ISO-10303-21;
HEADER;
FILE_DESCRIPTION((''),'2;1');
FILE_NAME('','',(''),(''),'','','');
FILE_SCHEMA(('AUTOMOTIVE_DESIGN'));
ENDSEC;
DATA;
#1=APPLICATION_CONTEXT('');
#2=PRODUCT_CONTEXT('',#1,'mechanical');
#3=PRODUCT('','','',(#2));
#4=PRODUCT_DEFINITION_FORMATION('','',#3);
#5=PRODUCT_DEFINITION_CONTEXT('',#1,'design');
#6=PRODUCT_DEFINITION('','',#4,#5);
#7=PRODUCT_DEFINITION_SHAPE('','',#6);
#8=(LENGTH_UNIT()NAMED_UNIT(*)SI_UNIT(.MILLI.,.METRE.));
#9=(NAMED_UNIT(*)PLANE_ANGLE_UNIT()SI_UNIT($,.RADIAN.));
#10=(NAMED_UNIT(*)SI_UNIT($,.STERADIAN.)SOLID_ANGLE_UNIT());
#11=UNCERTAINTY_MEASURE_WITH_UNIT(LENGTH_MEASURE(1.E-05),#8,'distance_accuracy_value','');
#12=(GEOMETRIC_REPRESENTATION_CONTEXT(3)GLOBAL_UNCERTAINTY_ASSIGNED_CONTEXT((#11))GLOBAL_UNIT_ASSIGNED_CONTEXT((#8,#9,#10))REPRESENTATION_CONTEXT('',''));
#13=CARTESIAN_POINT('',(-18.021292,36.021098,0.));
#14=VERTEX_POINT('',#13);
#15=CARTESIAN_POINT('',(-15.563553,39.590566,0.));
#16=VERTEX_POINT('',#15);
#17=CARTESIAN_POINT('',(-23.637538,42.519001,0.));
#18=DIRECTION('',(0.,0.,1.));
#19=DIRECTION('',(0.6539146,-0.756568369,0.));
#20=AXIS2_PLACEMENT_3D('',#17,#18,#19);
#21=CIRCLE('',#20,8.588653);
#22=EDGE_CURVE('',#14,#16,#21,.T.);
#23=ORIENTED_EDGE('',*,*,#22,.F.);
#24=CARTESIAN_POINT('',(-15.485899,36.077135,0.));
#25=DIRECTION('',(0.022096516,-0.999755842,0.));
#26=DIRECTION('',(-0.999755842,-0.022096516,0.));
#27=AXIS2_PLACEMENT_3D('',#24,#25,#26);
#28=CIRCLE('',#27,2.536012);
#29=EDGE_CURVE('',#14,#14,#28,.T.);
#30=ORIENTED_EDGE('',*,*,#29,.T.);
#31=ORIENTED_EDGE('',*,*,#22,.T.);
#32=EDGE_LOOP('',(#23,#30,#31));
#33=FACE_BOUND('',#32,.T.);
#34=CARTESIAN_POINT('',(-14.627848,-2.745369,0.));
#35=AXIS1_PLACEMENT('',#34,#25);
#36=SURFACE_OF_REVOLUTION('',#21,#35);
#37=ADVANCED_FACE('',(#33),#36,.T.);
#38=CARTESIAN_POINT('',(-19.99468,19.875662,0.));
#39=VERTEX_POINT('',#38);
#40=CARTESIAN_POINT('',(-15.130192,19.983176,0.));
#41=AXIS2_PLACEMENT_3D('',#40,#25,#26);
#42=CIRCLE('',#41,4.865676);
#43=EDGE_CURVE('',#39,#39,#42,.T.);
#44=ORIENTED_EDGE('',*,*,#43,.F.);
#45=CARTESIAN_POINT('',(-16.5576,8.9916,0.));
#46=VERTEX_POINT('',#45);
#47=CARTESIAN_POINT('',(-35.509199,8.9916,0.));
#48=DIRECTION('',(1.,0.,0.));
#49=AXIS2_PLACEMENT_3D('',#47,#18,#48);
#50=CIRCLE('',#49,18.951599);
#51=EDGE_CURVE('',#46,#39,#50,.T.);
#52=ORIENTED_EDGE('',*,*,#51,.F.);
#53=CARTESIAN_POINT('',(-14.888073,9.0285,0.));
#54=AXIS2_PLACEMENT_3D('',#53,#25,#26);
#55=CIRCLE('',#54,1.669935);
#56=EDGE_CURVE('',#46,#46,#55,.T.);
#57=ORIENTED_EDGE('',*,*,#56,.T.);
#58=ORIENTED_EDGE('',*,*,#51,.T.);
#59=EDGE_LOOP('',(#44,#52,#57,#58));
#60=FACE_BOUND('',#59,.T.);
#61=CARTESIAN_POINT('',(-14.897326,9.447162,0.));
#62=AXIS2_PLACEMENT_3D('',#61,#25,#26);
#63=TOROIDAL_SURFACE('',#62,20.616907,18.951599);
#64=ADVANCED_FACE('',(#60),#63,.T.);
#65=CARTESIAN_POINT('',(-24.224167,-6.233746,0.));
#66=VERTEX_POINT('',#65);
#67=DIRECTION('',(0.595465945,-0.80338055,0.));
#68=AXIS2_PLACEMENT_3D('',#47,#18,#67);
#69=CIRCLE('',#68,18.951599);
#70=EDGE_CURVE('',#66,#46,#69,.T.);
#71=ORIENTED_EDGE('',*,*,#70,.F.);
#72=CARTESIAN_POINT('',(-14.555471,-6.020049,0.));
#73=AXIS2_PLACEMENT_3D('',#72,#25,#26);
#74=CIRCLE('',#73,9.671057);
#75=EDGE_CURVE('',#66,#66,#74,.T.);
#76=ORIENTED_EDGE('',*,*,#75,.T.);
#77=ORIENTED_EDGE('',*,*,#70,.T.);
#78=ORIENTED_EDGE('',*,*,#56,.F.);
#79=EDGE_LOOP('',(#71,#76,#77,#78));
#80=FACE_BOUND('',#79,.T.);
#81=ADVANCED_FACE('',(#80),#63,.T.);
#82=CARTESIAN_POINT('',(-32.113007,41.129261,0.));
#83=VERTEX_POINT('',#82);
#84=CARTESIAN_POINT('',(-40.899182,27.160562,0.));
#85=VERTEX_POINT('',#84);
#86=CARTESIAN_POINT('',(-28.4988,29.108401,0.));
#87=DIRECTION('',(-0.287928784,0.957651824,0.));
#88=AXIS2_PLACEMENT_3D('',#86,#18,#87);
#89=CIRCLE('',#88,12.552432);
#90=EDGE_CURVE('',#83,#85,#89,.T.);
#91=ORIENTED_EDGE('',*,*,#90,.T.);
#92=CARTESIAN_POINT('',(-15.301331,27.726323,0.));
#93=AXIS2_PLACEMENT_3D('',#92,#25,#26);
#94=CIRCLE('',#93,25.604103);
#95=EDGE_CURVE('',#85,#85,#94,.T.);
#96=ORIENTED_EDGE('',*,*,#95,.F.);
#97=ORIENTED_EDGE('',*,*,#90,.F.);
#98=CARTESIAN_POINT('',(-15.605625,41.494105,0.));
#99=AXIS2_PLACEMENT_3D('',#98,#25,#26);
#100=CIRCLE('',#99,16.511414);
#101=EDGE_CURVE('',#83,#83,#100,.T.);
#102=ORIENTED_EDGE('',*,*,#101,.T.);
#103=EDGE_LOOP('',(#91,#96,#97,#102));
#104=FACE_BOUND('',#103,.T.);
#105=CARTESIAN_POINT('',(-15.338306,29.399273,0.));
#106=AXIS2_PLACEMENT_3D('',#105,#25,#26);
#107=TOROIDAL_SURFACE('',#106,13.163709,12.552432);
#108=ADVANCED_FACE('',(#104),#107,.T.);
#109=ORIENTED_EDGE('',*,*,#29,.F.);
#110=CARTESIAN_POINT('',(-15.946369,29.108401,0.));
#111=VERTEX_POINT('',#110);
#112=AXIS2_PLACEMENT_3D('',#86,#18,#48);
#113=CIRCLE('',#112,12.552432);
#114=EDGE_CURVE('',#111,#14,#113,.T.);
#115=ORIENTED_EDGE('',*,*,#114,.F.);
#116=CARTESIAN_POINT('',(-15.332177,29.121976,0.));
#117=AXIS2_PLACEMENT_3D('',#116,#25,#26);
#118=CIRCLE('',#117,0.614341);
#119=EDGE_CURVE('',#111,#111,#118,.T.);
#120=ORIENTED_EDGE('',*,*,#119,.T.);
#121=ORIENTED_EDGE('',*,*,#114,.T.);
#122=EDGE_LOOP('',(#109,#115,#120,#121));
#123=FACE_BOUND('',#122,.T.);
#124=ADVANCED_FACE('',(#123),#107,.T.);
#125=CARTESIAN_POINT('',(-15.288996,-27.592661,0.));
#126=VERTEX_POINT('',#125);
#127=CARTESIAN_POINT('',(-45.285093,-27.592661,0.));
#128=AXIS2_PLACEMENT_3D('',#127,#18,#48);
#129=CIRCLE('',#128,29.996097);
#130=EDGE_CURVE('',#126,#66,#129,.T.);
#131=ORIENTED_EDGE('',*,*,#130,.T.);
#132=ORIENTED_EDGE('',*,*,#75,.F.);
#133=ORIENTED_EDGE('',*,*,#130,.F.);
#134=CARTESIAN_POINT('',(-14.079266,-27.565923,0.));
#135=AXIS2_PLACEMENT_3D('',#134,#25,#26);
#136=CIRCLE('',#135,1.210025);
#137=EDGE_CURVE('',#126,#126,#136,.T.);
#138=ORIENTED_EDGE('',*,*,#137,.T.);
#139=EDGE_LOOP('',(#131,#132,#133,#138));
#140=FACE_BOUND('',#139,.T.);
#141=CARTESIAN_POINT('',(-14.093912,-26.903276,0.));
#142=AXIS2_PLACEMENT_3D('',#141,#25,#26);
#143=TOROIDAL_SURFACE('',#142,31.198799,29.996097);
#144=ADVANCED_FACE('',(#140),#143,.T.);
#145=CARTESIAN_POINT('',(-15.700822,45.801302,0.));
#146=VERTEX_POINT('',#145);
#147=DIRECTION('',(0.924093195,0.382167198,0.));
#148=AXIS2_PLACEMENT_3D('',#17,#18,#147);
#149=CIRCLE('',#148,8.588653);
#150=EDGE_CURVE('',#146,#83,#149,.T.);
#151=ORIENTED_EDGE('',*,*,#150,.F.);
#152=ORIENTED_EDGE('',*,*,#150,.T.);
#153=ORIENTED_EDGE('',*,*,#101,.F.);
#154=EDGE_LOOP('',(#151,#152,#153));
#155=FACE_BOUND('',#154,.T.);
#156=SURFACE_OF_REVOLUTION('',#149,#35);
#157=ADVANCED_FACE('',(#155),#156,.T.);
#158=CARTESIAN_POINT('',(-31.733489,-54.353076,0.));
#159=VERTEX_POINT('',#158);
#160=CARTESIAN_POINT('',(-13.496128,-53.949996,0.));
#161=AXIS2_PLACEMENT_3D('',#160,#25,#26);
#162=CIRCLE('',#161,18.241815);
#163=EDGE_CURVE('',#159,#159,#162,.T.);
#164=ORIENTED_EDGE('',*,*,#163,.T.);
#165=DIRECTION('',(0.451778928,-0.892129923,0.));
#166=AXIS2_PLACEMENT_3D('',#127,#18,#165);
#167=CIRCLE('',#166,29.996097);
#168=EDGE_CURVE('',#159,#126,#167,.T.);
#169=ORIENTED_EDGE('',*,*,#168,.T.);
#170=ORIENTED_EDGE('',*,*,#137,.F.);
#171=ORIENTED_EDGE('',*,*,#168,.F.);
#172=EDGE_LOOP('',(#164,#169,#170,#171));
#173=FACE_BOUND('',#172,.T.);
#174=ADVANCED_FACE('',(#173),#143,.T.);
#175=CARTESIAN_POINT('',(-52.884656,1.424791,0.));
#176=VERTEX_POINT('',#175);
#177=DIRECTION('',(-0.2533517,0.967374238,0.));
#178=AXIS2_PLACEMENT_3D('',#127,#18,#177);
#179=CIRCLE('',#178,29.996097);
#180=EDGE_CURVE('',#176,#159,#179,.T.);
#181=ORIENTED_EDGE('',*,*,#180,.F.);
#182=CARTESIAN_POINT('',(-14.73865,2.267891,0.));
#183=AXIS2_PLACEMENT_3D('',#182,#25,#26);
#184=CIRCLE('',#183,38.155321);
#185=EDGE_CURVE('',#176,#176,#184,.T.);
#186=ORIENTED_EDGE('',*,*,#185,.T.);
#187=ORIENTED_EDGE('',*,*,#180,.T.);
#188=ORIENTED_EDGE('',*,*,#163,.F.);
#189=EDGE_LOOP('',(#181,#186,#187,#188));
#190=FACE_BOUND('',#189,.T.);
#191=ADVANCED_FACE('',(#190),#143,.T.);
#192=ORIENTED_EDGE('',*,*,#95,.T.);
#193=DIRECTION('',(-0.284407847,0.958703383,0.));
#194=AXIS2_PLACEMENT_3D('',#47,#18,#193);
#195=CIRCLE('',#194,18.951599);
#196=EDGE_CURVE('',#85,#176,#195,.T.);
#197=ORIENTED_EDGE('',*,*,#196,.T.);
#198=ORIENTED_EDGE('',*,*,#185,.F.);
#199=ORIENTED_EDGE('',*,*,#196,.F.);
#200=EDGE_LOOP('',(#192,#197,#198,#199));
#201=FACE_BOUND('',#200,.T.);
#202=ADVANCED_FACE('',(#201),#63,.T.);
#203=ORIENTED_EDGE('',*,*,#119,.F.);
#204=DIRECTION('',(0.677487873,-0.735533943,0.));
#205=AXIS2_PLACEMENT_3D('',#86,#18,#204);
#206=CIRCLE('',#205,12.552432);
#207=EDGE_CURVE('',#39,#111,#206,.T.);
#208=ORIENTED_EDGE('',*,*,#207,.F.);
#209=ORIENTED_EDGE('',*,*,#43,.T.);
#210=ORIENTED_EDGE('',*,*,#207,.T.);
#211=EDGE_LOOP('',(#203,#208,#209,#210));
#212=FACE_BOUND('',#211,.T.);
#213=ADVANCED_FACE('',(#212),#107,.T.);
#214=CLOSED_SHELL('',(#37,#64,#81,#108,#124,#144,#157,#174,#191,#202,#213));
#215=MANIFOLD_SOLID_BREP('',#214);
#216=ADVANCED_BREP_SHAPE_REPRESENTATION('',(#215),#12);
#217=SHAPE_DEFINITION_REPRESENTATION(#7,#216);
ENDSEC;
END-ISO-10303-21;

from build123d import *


with BuildPart() as f1:
    # F0 (on Top) → F1 (revolve)
    with BuildSketch(Plane.XY):
        with BuildLine():
            Line((-15.5635529785, 39.5905664053), (-15.7008221149, 45.8013020266))
            ThreePointArc((-15.7008221149, 45.8013020266), (-25.9890385476, 50.7794728031), (-32.1130069449, 41.1292607477))
            ThreePointArc((-32.1130069449, 41.1292607477), (-24.2210019432, 40.909417782), (-18.0212922533, 36.0210976578))
            ThreePointArc((-18.0212922533, 36.0210976578), (-16.5635800166, 37.6482636414), (-15.5635529785, 39.5905664053))
        make_face()
        with BuildLine():
            ThreePointArc((-18.0212922533, 36.0210976578), (-24.2210019432, 40.909417782), (-32.1130069449, 41.1292607477))
            ThreePointArc((-32.1130069449, 41.1292607477), (-26.564502454, 34.4444831281), (-18.0212922533, 36.0210976578))
        make_face()
        with BuildLine():
            ThreePointArc((-18.0212922533, 36.0210976578), (-26.564502454, 34.4444831281), (-32.1130069449, 41.1292607477))
            ThreePointArc((-32.1130069449, 41.1292607477), (-39.1241426865, 35.7916379536), (-40.8991822818, 27.16056178))
            ThreePointArc((-40.8991822818, 27.16056178), (-29.2726936854, 26.8876636908), (-19.9946800375, 19.875661609))
            ThreePointArc((-19.9946800375, 19.875661609), (-17.0029111772, 24.0677588183), (-15.9463685086, 29.1084013879))
            ThreePointArc((-15.9463685086, 29.1084013879), (-16.4762849853, 32.7170949973), (-18.0212922533, 36.0210976578))
        make_face()
        with BuildLine():
            ThreePointArc((-19.9946800375, 19.875661609), (-29.2726936854, 26.8876636908), (-40.8991822818, 27.16056178))
            ThreePointArc((-40.8991822818, 27.16056178), (-32.6294972412, 17.2550941542), (-19.9946800375, 19.875661609))
        make_face()
        with BuildLine():
            ThreePointArc((-19.9946800375, 19.875661609), (-32.6294972412, 17.2550941542), (-40.8991822818, 27.16056178))
            ThreePointArc((-40.8991822818, 27.16056178), (-52.6890937803, 16.9924939955), (-52.8846556294, 1.4247911728))
            ThreePointArc((-52.8846556294, 1.4247911728), (-37.541361976, 1.3866505854), (-24.2241672845, -6.2337457553))
            ThreePointArc((-24.2241672845, -6.2337457553), (-18.5824082634, 0.468287802), (-16.5576002259, 8.9916000143))
            ThreePointArc((-16.5576002259, 8.9916000143), (-17.4372866131, 14.6985325185), (-19.9946800375, 19.875661609))
        make_face()
        with BuildLine():
            ThreePointArc((-24.2241672845, -6.2337457553), (-37.541361976, 1.3866505854), (-52.8846556294, 1.4247911728))
            ThreePointArc((-52.8846556294, 1.4247911728), (-40.4017050576, -9.3175910109), (-24.2241672845, -6.2337457553))
        make_face()
        with BuildLine():
            ThreePointArc((-24.2241672845, -6.2337457553), (-40.4017050576, -9.3175910109), (-52.8846556294, 1.4247911728))
            ThreePointArc((-52.8846556294, 1.4247911728), (-73.332363025, -38.2282854938), (-31.7334887384, -54.3530764989))
            ThreePointArc((-31.7334887384, -54.3530764989), (-19.7286744278, -43.2972872449), (-15.2889961527, -27.5926605548))
            ThreePointArc((-15.2889961527, -27.5926605548), (-17.6128018618, -16.0163860616), (-24.2241672845, -6.2337457553))
        make_face()
    revolve(axis=Axis((-14.6278478205, -2.7453694493, 0), (0.0220965163, -0.9997558422, 0)))


solid = f1.part
